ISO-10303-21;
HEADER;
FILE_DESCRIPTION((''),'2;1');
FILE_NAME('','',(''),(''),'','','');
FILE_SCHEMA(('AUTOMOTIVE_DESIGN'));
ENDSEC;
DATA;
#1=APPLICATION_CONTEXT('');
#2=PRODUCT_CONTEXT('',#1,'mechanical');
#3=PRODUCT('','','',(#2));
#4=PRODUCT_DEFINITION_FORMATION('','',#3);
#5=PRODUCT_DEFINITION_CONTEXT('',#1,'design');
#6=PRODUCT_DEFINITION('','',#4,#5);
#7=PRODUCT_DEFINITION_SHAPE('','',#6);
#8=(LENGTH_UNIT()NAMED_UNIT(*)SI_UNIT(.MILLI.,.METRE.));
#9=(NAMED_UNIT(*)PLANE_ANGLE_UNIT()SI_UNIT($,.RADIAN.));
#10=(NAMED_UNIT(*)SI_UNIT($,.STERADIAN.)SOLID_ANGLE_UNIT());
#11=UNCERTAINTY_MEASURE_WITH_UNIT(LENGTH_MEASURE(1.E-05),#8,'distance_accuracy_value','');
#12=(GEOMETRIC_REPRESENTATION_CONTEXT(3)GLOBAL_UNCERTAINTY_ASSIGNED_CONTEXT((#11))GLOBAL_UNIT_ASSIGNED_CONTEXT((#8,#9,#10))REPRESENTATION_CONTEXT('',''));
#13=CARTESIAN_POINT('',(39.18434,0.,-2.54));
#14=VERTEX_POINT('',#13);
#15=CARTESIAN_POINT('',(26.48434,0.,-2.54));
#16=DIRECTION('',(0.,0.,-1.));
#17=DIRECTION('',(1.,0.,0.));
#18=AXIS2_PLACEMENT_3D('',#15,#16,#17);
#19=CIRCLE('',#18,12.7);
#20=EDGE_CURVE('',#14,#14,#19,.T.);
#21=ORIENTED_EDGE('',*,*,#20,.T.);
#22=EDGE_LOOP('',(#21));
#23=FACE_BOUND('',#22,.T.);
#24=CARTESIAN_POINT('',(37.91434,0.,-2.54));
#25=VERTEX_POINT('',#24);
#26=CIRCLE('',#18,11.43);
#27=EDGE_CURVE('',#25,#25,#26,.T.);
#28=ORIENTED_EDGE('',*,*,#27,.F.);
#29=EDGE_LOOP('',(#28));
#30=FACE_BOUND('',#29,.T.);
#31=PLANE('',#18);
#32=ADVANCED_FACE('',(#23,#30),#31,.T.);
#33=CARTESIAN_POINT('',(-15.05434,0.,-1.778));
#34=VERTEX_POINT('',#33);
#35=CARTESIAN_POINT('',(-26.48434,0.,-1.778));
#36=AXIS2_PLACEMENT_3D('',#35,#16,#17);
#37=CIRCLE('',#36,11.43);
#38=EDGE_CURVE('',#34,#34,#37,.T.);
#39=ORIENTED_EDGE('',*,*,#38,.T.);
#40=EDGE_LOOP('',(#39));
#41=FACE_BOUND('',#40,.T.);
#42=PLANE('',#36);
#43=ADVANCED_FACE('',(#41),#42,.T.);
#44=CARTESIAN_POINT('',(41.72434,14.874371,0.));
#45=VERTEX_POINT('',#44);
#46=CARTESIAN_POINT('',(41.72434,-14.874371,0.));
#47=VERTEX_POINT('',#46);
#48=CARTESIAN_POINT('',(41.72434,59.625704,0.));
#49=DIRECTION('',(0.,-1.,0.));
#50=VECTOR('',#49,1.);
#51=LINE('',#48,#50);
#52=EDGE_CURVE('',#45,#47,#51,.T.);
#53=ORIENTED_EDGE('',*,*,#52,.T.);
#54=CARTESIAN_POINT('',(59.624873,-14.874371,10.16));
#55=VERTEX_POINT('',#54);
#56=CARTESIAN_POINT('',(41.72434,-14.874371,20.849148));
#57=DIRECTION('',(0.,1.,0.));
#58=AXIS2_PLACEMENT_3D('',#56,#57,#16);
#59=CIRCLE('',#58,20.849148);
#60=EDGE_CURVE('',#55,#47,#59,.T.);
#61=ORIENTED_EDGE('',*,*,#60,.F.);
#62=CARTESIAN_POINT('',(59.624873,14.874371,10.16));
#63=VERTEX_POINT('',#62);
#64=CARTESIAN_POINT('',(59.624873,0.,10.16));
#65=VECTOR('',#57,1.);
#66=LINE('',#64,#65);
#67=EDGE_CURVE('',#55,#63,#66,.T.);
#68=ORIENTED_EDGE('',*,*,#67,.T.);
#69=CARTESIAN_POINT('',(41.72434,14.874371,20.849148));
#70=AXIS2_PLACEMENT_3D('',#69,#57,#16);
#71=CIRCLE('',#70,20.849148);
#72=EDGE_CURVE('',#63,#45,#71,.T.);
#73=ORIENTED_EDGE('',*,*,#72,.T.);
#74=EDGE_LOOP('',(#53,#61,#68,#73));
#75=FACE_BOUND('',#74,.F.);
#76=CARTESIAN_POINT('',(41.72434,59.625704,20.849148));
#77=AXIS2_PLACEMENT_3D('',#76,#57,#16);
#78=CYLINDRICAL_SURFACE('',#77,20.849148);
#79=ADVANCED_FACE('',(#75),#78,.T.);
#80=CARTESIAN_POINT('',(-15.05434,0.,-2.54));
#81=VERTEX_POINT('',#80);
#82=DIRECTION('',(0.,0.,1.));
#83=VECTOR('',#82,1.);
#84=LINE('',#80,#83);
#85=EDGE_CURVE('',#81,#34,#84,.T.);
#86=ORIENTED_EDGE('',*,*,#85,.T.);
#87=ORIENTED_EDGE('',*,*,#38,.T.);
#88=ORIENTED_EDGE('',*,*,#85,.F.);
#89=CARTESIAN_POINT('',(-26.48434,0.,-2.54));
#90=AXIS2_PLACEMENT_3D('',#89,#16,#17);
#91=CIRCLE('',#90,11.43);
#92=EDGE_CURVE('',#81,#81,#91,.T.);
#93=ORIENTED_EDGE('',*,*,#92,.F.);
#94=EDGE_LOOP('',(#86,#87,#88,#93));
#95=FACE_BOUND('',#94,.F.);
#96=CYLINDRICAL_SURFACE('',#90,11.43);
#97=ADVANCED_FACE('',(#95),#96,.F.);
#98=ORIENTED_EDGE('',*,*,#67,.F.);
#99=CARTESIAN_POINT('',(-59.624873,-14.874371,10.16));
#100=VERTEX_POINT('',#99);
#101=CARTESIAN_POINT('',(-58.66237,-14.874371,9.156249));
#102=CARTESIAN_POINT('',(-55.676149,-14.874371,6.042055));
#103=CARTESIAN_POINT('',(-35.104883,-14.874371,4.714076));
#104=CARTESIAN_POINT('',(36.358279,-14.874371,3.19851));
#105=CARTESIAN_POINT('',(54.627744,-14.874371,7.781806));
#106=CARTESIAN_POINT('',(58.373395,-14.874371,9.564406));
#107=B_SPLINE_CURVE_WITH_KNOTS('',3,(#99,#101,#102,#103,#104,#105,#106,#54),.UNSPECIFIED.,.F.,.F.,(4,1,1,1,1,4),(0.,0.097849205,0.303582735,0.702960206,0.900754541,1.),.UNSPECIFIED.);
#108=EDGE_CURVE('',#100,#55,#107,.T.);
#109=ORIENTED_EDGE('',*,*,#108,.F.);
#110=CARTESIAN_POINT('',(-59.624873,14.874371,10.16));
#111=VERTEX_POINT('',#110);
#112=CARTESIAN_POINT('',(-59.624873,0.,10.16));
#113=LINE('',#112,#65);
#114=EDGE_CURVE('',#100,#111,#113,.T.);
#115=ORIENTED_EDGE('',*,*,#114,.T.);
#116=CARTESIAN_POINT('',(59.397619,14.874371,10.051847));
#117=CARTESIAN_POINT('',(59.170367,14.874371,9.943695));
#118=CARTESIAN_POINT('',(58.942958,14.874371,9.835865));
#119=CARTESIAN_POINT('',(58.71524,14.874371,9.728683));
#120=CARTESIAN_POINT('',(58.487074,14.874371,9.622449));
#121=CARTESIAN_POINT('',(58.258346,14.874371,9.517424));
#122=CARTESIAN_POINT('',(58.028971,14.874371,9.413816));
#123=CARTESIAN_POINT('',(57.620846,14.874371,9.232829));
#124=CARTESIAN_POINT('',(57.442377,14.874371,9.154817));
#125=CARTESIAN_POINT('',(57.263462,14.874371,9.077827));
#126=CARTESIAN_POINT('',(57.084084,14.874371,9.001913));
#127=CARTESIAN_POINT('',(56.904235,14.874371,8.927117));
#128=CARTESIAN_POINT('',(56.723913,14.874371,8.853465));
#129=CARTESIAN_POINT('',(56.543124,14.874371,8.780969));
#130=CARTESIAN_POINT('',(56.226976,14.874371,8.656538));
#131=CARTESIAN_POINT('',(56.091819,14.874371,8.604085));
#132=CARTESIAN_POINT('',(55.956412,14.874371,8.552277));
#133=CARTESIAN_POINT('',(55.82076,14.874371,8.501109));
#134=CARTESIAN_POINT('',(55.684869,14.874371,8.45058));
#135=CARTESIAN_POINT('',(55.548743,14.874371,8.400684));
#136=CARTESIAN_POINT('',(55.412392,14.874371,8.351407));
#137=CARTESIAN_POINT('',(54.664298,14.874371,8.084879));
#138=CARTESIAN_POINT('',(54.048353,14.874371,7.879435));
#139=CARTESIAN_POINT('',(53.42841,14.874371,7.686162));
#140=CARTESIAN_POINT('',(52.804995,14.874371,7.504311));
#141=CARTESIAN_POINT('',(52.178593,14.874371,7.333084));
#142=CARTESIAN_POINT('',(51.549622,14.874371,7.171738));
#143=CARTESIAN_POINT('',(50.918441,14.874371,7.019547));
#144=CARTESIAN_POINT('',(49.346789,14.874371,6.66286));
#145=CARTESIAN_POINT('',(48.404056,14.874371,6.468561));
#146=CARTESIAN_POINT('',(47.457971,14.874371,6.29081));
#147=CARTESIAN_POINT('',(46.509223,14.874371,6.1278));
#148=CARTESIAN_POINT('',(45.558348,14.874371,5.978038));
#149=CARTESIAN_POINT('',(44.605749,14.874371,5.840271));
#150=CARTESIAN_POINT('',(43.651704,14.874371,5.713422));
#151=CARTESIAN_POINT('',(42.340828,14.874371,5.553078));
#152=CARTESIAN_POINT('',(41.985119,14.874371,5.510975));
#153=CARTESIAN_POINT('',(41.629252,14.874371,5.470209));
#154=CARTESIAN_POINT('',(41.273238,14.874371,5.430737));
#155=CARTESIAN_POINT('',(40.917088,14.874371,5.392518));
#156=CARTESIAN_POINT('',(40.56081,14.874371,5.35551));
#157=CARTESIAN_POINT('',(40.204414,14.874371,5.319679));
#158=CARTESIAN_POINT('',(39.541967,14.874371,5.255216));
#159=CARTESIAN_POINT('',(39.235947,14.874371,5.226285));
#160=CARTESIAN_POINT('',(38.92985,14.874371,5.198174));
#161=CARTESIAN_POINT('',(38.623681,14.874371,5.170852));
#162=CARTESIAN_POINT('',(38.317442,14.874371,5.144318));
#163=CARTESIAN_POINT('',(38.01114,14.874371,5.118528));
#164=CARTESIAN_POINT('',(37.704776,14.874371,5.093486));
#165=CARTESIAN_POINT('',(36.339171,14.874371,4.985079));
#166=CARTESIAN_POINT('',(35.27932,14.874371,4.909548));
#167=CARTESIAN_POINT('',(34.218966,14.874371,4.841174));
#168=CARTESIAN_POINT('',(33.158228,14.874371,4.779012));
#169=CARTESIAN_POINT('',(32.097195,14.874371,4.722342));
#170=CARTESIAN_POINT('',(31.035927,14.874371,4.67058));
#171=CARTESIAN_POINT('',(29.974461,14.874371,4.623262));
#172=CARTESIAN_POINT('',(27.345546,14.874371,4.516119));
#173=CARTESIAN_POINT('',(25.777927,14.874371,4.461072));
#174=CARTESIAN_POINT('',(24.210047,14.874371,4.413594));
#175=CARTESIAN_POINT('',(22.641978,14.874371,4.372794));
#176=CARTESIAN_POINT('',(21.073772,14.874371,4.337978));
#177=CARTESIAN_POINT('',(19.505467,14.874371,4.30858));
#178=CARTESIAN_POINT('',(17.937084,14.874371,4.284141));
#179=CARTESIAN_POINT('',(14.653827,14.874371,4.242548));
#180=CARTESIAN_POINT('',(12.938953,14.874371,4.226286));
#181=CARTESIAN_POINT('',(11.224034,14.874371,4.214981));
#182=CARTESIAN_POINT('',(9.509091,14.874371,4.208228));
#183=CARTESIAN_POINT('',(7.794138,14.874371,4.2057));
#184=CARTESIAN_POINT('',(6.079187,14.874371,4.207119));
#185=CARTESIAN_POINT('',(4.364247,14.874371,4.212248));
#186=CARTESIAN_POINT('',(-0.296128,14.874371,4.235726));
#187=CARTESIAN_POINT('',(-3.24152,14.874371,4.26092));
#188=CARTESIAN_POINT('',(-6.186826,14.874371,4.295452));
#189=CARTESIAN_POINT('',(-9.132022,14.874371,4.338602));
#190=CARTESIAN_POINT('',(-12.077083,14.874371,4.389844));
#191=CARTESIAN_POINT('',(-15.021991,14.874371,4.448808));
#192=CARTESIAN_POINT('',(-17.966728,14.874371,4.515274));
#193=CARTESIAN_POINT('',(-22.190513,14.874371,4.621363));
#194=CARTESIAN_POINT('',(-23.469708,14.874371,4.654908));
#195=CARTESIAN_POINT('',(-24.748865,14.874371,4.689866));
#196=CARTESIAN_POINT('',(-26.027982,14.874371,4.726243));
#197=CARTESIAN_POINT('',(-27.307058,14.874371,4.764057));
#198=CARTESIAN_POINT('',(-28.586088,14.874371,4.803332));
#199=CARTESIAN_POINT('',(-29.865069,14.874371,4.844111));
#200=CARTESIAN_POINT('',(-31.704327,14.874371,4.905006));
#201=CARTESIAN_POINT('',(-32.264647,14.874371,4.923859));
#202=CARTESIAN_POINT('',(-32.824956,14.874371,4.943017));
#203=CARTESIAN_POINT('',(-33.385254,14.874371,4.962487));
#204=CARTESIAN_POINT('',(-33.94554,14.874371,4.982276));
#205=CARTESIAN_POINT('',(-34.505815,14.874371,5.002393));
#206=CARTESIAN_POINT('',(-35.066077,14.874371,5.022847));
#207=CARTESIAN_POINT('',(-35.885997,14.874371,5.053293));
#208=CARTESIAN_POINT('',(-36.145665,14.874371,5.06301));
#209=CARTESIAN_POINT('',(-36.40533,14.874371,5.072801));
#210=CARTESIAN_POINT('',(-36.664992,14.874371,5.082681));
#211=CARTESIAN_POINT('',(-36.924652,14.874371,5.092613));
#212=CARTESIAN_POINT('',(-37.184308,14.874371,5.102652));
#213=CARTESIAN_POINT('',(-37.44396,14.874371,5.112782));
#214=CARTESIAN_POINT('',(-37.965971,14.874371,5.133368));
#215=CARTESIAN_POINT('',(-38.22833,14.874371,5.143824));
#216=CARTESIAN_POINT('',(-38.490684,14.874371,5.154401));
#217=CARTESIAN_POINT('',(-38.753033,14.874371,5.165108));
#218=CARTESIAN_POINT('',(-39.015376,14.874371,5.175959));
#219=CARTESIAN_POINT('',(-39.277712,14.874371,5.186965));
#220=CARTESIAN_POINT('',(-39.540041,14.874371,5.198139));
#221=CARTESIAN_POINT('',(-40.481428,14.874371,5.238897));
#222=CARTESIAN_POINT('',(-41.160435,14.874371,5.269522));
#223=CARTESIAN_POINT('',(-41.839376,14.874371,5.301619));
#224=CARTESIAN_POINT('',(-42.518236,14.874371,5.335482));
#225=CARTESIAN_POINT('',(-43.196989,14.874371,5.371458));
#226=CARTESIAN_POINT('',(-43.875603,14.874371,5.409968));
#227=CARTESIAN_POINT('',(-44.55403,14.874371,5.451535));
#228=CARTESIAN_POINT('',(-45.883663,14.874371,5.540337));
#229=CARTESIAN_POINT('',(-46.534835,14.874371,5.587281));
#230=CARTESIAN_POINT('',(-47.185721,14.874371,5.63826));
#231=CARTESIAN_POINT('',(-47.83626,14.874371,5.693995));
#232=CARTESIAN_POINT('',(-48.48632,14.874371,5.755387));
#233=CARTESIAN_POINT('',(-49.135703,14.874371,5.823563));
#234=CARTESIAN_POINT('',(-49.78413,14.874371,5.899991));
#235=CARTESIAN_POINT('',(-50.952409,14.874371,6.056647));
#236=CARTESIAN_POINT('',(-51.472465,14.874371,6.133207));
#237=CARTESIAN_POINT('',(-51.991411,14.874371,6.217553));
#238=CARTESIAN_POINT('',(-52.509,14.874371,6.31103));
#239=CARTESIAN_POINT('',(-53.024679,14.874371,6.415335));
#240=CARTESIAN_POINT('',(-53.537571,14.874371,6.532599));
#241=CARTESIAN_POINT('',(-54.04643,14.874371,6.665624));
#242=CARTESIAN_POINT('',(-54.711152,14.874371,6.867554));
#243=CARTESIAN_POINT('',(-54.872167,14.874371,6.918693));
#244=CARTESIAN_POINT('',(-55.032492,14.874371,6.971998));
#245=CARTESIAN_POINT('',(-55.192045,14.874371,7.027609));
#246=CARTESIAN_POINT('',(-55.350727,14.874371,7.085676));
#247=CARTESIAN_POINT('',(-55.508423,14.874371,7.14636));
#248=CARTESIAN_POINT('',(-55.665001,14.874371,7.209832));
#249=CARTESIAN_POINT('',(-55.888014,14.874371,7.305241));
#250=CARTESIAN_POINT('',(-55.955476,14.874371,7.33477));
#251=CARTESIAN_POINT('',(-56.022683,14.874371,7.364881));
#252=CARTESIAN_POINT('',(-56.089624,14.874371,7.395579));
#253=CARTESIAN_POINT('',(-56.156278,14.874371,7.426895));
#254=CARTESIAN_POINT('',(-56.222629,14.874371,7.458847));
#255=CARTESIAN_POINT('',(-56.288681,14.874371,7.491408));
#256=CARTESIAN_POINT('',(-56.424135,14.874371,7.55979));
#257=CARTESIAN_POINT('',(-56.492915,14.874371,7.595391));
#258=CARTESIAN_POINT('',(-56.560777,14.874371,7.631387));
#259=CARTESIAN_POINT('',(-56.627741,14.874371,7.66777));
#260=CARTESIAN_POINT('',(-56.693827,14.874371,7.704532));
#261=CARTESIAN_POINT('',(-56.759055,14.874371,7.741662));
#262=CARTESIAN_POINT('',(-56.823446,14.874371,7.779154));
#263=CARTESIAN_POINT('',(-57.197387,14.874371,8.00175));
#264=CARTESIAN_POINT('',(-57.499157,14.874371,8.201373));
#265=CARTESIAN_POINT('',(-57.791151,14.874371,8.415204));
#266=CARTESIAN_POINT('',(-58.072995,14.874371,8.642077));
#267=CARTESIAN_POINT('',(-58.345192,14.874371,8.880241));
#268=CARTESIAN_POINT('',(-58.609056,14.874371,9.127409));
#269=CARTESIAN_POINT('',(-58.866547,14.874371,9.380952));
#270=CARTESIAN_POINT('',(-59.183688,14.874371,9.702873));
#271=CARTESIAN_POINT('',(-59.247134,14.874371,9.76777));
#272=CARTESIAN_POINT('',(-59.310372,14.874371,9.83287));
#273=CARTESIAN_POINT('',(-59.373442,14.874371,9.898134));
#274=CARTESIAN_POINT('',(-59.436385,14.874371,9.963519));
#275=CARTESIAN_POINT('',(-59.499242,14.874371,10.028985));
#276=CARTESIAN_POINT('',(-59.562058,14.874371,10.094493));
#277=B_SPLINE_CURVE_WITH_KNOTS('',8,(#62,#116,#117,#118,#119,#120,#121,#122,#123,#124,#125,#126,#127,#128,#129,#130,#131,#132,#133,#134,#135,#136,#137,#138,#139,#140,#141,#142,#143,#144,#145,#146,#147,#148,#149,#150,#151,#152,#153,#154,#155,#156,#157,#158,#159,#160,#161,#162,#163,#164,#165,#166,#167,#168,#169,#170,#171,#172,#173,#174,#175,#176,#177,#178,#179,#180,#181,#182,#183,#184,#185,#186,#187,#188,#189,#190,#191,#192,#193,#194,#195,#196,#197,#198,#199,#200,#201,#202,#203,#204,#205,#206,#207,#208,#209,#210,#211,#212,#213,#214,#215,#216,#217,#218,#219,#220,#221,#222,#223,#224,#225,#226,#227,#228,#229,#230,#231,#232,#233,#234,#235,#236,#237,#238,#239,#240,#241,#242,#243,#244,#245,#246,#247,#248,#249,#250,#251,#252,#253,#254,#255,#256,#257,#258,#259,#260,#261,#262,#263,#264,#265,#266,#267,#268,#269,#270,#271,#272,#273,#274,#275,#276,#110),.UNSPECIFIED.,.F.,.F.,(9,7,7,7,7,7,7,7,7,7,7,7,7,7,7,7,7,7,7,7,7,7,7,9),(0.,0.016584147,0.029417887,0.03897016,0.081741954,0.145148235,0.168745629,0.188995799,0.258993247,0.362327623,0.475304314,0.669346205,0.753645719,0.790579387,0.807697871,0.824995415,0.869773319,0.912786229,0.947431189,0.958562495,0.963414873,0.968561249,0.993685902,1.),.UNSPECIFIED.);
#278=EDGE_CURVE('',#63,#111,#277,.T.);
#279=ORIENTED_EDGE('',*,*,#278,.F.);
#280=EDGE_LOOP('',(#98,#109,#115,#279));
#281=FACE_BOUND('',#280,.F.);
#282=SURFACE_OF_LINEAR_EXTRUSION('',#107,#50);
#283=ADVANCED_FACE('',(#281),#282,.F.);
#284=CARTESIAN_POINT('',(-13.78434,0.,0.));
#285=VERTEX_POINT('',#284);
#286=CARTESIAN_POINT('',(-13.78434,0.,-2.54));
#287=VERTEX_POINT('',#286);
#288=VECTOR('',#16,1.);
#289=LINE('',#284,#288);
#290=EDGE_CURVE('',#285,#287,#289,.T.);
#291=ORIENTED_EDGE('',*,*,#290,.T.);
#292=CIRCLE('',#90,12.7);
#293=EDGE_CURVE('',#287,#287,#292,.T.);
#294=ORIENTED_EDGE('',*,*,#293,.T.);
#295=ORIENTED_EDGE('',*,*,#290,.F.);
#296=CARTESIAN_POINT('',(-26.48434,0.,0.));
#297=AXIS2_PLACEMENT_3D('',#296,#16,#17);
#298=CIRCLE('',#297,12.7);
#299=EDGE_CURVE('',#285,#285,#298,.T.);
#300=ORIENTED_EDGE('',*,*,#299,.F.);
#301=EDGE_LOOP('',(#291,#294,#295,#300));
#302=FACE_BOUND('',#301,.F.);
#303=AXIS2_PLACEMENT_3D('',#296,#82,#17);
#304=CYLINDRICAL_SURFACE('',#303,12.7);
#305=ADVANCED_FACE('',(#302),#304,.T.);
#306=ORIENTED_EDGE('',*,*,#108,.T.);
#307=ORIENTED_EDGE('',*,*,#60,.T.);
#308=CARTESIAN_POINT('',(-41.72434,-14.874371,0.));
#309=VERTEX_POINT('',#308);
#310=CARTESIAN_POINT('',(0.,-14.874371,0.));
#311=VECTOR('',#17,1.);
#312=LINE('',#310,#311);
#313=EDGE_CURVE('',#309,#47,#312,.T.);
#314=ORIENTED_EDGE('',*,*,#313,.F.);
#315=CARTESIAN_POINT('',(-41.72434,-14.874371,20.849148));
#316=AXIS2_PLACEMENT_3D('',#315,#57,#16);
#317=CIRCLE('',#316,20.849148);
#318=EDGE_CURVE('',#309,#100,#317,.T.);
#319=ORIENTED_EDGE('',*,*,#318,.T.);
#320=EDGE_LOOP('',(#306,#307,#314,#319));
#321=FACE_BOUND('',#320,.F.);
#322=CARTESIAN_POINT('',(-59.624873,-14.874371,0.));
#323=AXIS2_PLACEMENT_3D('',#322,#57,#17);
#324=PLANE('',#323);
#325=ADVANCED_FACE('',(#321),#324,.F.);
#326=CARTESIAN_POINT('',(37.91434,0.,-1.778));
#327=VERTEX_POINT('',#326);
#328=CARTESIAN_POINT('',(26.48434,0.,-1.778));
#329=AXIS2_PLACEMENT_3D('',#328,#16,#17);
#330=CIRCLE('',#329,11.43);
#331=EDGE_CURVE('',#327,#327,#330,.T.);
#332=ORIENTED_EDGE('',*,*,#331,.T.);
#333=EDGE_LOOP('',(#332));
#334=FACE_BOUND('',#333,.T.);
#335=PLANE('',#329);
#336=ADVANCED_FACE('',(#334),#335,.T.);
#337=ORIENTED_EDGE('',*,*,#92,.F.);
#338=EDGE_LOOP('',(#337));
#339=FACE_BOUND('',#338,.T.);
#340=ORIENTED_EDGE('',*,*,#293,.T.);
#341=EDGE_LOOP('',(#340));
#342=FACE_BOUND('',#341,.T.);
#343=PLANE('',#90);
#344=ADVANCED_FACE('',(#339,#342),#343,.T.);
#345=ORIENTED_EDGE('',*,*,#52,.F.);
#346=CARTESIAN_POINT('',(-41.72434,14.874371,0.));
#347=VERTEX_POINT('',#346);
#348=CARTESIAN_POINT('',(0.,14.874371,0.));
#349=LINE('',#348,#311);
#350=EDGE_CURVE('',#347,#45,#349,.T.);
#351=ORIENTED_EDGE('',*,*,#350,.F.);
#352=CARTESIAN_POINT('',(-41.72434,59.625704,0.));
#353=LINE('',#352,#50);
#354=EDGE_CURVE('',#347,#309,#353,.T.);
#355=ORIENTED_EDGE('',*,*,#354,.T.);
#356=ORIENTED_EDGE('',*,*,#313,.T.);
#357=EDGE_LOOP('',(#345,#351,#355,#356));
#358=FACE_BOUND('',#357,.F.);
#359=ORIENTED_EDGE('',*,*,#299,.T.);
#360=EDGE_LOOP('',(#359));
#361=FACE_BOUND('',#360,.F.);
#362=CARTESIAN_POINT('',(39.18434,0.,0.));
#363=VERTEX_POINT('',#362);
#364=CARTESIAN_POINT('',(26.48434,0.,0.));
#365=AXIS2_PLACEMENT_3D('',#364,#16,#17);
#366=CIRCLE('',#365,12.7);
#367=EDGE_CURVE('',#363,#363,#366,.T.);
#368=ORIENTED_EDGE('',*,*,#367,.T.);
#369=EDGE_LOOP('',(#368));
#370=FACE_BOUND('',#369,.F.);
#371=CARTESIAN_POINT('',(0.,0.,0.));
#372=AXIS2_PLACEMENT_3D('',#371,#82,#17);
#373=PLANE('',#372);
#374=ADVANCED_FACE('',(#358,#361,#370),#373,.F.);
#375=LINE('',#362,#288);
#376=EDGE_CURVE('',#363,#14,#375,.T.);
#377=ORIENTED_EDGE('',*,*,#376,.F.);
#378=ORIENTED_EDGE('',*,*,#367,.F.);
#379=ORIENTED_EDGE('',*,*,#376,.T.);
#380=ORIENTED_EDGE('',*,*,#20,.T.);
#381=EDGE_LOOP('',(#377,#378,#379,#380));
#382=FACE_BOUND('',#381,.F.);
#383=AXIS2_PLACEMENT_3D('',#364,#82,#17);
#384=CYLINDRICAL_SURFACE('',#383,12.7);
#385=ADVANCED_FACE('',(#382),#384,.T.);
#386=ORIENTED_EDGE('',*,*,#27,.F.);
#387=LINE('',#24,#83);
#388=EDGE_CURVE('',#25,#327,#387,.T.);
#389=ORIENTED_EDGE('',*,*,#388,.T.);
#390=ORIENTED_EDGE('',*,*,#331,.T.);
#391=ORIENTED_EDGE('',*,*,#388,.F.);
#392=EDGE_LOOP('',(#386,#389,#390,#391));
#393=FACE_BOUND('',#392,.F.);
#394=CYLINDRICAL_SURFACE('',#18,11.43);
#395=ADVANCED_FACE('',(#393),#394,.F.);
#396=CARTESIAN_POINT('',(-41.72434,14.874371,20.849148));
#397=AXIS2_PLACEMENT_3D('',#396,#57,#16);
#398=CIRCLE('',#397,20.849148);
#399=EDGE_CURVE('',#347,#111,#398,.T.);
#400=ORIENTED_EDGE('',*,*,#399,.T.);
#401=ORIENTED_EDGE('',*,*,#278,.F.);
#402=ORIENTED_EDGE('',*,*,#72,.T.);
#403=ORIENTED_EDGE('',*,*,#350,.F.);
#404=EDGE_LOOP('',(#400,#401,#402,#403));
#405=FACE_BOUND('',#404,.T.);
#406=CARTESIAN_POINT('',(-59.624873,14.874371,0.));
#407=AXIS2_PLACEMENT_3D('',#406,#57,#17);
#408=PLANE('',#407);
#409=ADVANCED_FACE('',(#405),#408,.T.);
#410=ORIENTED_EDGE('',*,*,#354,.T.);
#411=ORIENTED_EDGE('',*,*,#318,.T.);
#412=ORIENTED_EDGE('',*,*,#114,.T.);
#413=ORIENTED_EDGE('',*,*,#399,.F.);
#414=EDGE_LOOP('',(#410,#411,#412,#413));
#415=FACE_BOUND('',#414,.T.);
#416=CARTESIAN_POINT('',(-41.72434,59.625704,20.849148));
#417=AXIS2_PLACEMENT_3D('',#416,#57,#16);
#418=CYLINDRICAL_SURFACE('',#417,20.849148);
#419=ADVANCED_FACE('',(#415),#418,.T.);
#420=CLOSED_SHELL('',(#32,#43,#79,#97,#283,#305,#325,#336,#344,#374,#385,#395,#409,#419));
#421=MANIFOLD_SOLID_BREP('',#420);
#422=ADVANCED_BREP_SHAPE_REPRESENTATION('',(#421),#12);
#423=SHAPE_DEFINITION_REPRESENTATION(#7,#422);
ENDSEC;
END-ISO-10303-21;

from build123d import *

# Parameters (mm, degrees)
F0_W        = 119.2497462034
F0_H        = 29.7487415373
F1_DEPTH    = 10.16
F3_DEPTH    = 35.052
F4_T1_DEPTH = 119.2514082514
F5_R        = 12.7
F6_DEPTH    = 2.54
F7_R        = 11.43
F8_DEPTH    = 0.762


# Not quite as in the source:
# - a fillet or chamfer that OpenCascade refuses, or shapes differently, is made with other operations: its cross-section is extruded or revolved along the edge and cut away or added


with BuildPart() as f1:
    # F0 (on Top) → F1 (new body)
    with BuildSketch(Plane.XY):
        Rectangle(F0_W, F0_H)
    extrude(amount=F1_DEPTH)

    # F2 (on face) → F3 (cut)
    with BuildSketch(Plane.XZ.offset(14.8743707687)):
        with BuildLine():
            Line((59.6248731017, 10.16), (-59.6248731017, 10.16))
            add(Edge.make_bspline(
                [(-59.6248731017, 10.16), (-58.6623700153, 9.1562491692), (-55.6761493356, 6.0420550119), (-35.1048833715, 4.7140763142), (36.3582789798, 3.1985096699), (54.6277439575, 7.7818062363), (58.3733948485, 9.5644064719), (59.6248731017, 10.16)],
                knots=[0, 0, 0, 0, 0.0978492049, 0.3035827346, 0.702960206, 0.9007545408, 1, 1, 1, 1], degree=3))
        make_face()
    extrude(amount=-F3_DEPTH, mode=Mode.SUBTRACT)

    # F4: fillet of radius 20.8491483247 on 2 edges, made by hand

    # F4_s2 → F4_t1 (cut)
    with BuildSketch(Plane.XZ.offset(-59.6257041257)):
        with BuildLine():
            ThreePointArc((41.7243397589, 0), (52.01577666, 2.7170411009), (59.6248731017, 10.16))
            Line((59.6248731017, 10.16), (59.6248731017, 0))
            Line((59.6248731017, 0), (41.7243397589, 0))
        make_face()
        with BuildLine():
            ThreePointArc((-41.7243397589, 0), (-52.01577666, 2.7170411009), (-59.6248731017, 10.16))
            Line((-59.6248731017, 10.16), (-59.6248731017, 0))
            Line((-59.6248731017, 0), (-41.7243397589, 0))
        make_face()
    extrude(amount=F4_T1_DEPTH, mode=Mode.SUBTRACT)

    # F5 (on face) → F6 (join)
    with BuildSketch(Plane(origin=(0, 0, 0), x_dir=(1, 0, 0), z_dir=(0, 0, -1))):
        with Locations((-26.4843397589, 0)):
            Circle(F5_R)
        with Locations((26.4843397589, 0)):
            Circle(F5_R)
    extrude(amount=F6_DEPTH)

    # F7 (on face) → F8 (cut)
    with BuildSketch(Plane(origin=(0, 0, -2.54), x_dir=(1, 0, 0), z_dir=(0, 0, -1))):
        with Locations((-26.4843397589, 0)):
            Circle(F7_R)
        with Locations((26.4843397589, 0)):
            Circle(F7_R)
    extrude(amount=-F8_DEPTH, mode=Mode.SUBTRACT)


solid = f1.part
